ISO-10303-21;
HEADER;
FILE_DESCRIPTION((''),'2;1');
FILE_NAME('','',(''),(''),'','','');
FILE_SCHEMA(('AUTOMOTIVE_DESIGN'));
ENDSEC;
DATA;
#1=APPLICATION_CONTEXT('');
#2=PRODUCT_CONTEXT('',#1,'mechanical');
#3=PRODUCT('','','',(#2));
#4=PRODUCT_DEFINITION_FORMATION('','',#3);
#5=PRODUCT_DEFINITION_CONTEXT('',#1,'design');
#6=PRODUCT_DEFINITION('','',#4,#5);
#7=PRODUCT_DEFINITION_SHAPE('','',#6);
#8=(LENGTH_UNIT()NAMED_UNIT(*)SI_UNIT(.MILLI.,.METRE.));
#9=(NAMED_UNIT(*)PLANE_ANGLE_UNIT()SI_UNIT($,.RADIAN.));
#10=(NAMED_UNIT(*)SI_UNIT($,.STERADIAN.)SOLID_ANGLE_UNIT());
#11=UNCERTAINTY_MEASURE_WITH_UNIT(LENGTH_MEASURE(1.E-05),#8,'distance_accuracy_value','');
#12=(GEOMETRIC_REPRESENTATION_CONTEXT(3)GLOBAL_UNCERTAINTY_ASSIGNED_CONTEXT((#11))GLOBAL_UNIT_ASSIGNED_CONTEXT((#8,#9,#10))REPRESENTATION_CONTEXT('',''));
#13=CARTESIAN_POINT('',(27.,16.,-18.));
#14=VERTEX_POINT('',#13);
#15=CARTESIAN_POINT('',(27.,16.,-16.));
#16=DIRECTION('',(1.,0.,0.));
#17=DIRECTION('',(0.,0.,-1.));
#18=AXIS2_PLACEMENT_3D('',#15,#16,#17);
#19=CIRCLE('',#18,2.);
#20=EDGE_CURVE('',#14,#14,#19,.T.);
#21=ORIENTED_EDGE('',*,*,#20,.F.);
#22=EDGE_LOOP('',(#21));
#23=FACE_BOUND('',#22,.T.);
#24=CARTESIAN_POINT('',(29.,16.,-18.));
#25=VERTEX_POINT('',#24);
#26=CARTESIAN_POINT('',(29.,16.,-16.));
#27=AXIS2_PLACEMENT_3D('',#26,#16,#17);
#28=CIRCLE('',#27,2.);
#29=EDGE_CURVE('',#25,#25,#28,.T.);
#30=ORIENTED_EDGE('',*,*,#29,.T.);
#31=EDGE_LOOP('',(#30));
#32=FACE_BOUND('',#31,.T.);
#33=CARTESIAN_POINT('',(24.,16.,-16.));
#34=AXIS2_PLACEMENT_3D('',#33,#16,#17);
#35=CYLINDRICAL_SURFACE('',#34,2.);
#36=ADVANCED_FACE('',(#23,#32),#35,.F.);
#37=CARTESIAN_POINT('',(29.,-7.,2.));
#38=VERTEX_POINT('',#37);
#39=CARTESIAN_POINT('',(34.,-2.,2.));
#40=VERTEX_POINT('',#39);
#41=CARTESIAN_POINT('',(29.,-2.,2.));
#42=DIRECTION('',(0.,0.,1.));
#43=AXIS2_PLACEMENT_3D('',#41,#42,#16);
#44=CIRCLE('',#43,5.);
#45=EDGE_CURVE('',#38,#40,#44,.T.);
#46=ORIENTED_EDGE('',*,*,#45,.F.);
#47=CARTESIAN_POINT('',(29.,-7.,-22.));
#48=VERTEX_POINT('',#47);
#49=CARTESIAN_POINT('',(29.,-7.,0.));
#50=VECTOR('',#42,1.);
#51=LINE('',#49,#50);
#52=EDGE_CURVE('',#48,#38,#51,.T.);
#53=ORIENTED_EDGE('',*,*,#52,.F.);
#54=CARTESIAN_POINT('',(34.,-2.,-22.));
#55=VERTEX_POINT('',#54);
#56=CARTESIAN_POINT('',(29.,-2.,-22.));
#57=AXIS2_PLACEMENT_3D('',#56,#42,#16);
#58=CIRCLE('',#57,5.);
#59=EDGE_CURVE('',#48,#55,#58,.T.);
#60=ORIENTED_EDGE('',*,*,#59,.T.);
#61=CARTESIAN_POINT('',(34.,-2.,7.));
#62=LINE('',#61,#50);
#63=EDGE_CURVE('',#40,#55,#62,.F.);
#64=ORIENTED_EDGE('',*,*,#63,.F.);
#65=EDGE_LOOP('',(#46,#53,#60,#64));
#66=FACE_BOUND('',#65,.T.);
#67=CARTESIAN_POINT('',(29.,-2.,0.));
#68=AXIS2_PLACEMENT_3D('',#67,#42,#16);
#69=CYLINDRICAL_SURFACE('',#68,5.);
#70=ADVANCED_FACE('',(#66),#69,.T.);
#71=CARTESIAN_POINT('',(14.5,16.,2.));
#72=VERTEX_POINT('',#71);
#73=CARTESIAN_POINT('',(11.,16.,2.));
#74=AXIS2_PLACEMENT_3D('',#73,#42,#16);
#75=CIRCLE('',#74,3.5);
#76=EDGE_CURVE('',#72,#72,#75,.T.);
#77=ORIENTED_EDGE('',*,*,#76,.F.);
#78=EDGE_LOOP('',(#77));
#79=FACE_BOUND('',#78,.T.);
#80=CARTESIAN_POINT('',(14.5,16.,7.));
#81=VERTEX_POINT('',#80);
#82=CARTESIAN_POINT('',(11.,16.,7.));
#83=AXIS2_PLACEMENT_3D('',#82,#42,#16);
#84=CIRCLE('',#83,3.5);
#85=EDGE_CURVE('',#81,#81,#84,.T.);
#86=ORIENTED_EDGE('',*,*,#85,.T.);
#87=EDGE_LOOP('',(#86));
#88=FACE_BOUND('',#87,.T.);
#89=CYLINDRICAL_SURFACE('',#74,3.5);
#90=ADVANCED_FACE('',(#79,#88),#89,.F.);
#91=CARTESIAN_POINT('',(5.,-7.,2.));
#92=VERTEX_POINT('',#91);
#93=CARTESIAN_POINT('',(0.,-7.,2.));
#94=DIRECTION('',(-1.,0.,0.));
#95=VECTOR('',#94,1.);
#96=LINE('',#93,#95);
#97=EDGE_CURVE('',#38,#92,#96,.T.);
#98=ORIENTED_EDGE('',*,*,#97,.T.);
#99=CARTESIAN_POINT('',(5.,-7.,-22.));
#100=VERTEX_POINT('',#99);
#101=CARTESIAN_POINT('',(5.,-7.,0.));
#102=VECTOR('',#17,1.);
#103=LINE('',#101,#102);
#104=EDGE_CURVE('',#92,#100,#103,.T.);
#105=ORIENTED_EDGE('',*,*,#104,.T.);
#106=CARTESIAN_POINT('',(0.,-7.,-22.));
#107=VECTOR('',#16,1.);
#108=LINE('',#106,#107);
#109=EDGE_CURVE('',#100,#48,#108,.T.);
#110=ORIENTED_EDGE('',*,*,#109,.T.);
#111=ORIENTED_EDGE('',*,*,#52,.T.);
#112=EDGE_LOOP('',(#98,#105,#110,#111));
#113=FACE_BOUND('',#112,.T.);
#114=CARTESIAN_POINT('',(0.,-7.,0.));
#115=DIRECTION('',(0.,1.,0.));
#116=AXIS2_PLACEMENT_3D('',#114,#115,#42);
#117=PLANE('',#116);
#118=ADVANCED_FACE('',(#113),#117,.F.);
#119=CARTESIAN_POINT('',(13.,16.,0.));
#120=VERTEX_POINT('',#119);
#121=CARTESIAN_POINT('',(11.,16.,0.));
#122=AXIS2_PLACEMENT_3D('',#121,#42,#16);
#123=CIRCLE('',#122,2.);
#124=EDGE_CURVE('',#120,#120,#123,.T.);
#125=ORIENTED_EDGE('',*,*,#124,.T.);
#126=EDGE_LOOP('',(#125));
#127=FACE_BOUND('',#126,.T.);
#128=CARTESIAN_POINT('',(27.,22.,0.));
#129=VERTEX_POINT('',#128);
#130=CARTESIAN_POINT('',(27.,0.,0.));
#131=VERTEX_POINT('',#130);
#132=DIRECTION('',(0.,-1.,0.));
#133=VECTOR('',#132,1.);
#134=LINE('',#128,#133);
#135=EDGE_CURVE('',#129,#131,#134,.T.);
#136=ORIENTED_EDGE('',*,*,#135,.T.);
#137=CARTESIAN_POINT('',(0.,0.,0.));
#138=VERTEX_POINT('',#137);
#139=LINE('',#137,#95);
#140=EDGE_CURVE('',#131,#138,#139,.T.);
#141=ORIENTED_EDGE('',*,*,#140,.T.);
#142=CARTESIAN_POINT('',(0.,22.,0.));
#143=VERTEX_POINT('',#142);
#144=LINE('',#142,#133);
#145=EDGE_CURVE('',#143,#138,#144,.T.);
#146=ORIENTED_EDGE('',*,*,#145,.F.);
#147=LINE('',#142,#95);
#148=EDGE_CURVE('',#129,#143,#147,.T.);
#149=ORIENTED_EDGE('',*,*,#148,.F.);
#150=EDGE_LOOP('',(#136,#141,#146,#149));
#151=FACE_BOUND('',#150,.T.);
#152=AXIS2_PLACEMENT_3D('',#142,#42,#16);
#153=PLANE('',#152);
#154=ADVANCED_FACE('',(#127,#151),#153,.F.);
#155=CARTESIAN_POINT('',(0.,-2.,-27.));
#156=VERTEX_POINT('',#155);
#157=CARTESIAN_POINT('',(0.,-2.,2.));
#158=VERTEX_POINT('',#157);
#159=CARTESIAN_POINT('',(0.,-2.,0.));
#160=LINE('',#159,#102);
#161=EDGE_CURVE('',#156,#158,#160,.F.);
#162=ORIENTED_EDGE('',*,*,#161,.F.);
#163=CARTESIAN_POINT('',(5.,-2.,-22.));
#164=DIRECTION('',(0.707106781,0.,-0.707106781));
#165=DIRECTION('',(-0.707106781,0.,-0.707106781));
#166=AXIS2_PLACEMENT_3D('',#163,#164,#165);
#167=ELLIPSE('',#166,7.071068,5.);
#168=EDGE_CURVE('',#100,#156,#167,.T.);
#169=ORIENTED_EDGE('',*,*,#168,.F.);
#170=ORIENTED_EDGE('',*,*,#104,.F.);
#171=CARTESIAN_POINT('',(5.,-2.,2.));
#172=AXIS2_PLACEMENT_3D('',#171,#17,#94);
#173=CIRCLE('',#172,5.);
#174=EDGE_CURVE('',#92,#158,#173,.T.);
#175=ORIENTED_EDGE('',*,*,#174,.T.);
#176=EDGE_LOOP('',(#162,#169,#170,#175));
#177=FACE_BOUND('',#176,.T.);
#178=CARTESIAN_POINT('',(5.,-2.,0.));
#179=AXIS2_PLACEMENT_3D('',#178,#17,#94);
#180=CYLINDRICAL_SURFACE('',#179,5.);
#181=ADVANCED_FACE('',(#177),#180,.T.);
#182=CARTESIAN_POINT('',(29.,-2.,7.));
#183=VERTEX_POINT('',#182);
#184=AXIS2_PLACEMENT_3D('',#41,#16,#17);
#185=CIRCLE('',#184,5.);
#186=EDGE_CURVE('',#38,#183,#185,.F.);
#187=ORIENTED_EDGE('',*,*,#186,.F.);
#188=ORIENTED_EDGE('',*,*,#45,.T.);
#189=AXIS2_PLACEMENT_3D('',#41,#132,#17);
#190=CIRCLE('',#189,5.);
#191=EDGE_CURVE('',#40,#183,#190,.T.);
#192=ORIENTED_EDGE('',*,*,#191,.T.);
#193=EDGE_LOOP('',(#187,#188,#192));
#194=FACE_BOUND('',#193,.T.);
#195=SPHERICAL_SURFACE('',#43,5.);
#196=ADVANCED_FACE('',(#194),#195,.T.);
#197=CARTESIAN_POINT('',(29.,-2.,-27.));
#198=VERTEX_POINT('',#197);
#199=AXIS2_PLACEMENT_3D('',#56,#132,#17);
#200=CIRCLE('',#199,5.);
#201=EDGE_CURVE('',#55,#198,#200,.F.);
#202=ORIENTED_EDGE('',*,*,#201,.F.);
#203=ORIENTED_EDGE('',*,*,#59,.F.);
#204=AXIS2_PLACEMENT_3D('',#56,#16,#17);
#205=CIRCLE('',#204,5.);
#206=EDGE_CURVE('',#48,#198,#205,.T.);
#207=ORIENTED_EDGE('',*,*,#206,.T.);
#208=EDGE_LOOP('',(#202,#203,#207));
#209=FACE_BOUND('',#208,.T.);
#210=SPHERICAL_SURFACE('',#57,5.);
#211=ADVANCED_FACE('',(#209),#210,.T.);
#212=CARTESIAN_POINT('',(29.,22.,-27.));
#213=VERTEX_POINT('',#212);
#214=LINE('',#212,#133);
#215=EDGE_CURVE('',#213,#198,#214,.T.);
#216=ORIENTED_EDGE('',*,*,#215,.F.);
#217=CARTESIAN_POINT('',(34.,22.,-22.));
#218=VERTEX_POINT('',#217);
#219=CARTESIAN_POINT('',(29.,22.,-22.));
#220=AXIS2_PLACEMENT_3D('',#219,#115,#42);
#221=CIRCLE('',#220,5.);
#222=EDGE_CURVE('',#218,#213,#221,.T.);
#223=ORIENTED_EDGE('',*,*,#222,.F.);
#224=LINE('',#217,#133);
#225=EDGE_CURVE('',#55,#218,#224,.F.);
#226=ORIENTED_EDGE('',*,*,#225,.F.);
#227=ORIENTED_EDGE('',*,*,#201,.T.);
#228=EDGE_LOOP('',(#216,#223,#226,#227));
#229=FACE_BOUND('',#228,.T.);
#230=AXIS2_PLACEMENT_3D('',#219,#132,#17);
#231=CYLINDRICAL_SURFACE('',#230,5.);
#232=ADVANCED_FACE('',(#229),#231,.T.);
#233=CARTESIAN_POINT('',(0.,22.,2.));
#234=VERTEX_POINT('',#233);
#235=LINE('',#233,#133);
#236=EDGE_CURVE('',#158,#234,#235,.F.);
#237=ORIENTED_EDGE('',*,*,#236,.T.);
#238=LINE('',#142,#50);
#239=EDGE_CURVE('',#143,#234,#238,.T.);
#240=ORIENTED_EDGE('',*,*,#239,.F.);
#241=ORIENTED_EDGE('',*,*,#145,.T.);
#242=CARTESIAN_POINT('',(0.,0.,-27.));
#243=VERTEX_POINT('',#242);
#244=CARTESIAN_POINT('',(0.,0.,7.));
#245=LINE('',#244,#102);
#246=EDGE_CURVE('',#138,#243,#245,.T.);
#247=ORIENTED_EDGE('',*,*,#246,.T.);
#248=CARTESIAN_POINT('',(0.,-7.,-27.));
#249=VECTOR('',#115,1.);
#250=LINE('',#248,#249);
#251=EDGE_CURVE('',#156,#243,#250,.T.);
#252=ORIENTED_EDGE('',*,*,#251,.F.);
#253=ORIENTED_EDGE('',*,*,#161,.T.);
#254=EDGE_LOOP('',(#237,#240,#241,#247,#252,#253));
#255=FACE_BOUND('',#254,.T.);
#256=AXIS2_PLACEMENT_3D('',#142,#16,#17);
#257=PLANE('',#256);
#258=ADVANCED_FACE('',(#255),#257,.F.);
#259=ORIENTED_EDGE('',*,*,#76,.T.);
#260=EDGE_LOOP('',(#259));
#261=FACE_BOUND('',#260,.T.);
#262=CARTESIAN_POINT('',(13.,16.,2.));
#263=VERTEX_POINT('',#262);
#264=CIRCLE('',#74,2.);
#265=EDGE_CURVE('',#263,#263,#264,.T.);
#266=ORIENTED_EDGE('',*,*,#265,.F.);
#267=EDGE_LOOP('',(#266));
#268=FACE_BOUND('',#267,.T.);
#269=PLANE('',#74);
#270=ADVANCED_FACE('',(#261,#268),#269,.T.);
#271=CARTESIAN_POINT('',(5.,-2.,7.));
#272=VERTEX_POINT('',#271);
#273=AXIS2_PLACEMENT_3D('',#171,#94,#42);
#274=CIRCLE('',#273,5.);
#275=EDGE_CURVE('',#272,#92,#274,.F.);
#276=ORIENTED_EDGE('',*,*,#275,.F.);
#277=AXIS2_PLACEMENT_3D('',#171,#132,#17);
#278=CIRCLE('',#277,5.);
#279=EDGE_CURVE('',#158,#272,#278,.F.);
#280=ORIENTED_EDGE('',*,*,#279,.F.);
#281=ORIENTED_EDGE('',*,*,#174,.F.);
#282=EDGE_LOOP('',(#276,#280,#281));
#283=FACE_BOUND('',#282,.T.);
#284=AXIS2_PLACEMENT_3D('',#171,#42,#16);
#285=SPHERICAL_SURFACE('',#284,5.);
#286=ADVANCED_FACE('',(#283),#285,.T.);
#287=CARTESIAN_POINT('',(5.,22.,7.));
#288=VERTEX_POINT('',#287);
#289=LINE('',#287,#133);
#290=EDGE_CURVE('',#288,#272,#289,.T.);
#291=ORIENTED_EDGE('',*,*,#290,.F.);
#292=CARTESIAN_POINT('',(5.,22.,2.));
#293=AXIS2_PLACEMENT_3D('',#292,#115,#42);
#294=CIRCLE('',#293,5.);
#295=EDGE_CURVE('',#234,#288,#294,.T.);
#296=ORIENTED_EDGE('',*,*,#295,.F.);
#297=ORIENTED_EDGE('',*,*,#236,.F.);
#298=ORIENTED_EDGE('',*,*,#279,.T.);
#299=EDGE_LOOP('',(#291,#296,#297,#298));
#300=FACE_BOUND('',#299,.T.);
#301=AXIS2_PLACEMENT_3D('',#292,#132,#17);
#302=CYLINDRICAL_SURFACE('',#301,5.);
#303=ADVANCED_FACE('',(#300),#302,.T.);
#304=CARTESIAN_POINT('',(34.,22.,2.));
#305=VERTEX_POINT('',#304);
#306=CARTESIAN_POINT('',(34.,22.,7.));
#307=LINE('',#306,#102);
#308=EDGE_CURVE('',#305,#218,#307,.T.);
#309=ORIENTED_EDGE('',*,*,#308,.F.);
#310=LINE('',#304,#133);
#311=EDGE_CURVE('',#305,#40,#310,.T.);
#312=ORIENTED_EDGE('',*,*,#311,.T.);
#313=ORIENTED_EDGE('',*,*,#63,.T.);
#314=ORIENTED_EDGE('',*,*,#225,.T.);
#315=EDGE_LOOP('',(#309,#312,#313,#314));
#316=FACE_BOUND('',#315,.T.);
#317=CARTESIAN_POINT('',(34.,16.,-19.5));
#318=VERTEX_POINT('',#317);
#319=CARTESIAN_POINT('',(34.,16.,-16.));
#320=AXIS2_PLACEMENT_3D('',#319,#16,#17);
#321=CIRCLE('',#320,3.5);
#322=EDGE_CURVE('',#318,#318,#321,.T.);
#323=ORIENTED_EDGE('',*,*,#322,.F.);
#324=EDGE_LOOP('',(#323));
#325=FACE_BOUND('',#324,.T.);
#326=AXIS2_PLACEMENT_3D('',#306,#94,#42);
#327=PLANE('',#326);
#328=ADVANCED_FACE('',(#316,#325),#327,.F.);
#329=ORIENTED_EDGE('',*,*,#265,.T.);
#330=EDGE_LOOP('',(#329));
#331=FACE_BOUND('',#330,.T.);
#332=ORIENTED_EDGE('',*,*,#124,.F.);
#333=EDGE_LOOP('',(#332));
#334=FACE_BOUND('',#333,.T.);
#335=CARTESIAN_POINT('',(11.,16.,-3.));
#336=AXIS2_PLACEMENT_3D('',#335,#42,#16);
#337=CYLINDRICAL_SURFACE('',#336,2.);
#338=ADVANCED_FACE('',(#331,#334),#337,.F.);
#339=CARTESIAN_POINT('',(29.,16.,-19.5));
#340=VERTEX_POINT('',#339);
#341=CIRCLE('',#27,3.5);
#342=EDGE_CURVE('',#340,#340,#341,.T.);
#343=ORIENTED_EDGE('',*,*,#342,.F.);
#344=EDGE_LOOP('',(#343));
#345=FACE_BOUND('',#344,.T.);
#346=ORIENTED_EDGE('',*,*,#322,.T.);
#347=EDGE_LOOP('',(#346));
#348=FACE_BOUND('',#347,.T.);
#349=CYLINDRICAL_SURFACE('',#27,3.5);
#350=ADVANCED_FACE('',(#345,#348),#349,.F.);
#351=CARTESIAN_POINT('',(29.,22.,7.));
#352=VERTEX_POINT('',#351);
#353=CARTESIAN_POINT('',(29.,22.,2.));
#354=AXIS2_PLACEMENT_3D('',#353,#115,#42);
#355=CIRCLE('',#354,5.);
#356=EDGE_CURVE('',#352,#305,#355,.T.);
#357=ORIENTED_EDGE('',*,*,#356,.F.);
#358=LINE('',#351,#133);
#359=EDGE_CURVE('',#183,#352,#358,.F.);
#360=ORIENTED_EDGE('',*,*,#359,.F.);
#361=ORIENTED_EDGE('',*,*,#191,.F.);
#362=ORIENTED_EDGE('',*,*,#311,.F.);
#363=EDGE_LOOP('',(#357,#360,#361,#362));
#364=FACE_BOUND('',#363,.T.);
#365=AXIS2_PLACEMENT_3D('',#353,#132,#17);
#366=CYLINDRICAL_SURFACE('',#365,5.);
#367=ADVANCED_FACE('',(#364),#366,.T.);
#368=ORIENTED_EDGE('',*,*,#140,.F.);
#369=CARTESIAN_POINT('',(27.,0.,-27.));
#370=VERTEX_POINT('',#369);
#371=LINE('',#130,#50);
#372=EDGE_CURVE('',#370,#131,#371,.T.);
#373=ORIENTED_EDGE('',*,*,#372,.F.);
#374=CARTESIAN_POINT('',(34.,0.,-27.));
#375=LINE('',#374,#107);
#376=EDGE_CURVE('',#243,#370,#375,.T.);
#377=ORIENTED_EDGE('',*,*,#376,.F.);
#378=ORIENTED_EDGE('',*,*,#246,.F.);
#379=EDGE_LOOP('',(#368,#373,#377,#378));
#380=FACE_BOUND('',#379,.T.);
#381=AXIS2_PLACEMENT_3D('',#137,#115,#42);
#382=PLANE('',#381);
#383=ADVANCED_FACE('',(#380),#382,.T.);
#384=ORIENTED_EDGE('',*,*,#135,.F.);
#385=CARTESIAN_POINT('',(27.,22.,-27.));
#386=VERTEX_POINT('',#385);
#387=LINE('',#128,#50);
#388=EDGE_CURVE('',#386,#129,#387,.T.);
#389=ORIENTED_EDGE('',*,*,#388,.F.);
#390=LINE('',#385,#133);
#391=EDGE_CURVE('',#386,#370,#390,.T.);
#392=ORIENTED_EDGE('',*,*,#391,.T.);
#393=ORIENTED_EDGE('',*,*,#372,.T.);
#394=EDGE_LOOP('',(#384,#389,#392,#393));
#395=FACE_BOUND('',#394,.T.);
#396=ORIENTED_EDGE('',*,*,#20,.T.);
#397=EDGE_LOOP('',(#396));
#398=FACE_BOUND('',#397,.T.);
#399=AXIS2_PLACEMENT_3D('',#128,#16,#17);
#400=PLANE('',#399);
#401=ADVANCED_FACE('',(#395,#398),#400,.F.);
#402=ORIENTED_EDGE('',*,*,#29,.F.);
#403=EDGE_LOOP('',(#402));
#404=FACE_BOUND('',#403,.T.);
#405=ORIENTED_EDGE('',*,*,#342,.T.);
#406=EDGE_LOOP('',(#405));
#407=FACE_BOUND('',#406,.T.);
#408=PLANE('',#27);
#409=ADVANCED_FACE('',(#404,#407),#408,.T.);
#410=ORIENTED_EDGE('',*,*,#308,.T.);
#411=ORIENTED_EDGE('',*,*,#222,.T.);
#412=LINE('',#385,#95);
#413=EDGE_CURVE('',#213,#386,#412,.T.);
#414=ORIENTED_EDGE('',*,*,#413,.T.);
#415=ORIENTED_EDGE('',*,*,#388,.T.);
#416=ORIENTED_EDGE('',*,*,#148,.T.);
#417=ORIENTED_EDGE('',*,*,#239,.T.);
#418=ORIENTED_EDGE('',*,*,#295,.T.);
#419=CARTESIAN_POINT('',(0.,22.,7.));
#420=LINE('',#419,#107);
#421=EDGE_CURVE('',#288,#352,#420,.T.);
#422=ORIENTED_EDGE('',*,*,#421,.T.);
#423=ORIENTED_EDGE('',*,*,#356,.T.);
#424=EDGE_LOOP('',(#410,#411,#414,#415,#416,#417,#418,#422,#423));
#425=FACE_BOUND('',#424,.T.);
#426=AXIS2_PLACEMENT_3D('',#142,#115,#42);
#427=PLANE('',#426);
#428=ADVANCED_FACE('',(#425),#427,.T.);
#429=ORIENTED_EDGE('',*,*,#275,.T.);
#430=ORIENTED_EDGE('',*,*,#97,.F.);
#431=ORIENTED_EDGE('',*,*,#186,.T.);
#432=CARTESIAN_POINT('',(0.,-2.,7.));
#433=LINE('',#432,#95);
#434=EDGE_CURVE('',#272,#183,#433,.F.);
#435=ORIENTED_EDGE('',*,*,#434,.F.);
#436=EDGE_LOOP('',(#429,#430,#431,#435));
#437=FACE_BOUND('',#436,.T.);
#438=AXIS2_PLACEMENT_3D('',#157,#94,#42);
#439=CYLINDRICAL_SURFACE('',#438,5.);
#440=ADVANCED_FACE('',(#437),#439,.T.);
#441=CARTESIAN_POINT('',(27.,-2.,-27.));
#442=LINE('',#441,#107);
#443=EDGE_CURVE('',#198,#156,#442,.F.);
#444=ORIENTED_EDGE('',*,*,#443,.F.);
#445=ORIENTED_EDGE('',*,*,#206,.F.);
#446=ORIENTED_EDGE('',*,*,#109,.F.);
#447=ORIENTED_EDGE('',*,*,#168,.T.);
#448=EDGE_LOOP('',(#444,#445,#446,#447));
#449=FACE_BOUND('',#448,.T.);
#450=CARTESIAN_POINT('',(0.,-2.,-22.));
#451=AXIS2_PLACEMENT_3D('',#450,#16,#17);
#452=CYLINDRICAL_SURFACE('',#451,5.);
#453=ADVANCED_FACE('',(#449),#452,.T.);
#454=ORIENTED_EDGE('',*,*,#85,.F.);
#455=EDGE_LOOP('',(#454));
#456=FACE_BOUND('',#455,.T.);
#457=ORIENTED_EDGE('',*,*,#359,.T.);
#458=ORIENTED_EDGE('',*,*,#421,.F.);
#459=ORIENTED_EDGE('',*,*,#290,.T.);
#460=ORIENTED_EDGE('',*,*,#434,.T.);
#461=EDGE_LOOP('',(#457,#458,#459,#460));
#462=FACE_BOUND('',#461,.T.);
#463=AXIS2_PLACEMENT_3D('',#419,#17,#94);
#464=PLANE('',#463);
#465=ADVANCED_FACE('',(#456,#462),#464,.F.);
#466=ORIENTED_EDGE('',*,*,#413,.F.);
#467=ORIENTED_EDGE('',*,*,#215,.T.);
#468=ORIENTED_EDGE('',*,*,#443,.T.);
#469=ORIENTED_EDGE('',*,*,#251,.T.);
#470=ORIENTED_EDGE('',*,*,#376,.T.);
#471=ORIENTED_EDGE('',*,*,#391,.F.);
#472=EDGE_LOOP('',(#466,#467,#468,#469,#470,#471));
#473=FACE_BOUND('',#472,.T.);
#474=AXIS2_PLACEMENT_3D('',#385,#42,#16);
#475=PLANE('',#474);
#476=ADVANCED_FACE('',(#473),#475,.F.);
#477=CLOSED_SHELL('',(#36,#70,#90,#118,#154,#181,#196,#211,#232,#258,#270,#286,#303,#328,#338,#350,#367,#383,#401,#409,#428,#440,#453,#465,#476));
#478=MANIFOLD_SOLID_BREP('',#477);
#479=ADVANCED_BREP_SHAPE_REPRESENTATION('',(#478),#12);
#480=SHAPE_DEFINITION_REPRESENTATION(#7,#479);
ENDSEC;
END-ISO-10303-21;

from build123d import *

# Parameters (mm, degrees)
SALIENTE_EXTRUIR1_DEPTH = 22
CROQUIS2_W              = 34
CROQUIS2_H              = 34
SALIENTE_EXTRUIR2_DEPTH = 7
REDONDEO1_R             = 5
CROQUIS3_R              = 3.5
CORTAR_EXTRUIR1_DEPTH   = 5
CROQUIS4_R              = 2
CORTAR_EXTRUIR2_DEPTH   = 5
CROQUIS5_R              = 3.5
CORTAR_EXTRUIR3_DEPTH   = 5
CROQUIS6_R              = 2
CORTAR_EXTRUIR4_DEPTH   = 5
REDONDEO2_R             = 5


with BuildPart() as part:
    # Croquis1 → Saliente-Extruir1 (new body)
    with BuildSketch(Plane(origin=(0, 0, 0), x_dir=(1, 0, 0), z_dir=(0, 1, 0))):
        Polygon((0, 0), (27, 0), (27, 27), (34, 27), (34, -7), (0, -7), align=None)
    extrude(amount=SALIENTE_EXTRUIR1_DEPTH)

    # Croquis2 → Saliente-Extruir2 (add)
    with BuildSketch(Plane(origin=(0, 0, 0), x_dir=(-1, 0, 0), z_dir=(0, -1, 0))):
        with Locations((-17, 10)):
            Rectangle(CROQUIS2_W, CROQUIS2_H)
    extrude(amount=SALIENTE_EXTRUIR2_DEPTH)

    # Redondeo1
    redondeo1_edges = [part.edges().sort_by_distance(p)[0] for p in [
        (34, 7.5, -27),
        (34, 7.5, 7),
        (0, 7.5, 7),
        (34, -7, -10),
        (17, -7, 7),
    ]]
    fillet(redondeo1_edges, radius=REDONDEO1_R)

    # Croquis3 → Cortar-Extruir1 (cut)
    with BuildSketch(Plane(origin=(34, 0, 0), x_dir=(0, 0, -1), z_dir=(1, 0, 0))):
        with Locations((16, 16)):
            Circle(CROQUIS3_R)
    extrude(amount=-CORTAR_EXTRUIR1_DEPTH, mode=Mode.SUBTRACT)

    # Croquis4 → Cortar-Extruir2 (cut)
    with BuildSketch(Plane(origin=(29, 0, 0), x_dir=(0, 0, -1), z_dir=(1, 0, 0))):
        with Locations((16, 16)):
            Circle(CROQUIS4_R)
    extrude(amount=-CORTAR_EXTRUIR2_DEPTH, mode=Mode.SUBTRACT)

    # Croquis5 → Cortar-Extruir3 (cut)
    with BuildSketch(Plane.XY.offset(7)):
        with Locations((11, 16)):
            Circle(CROQUIS5_R)
    extrude(amount=-CORTAR_EXTRUIR3_DEPTH, mode=Mode.SUBTRACT)

    # Croquis6 → Cortar-Extruir4 (cut)
    with BuildSketch(Plane.XY.offset(2)):
        with Locations((11, 16)):
            Circle(CROQUIS6_R)
    extrude(amount=-CORTAR_EXTRUIR4_DEPTH, mode=Mode.SUBTRACT)

    # Redondeo2
    # the kernel refuses this fillet: 5 mm, written as the material it takes off along each edge
    with BuildSketch(Plane(origin=(29, -2, -22), x_dir=(0, -1, 0), z_dir=(0, 0, -1))) as redondeo2_piece_1_section:
        Polygon((0, 0), (REDONDEO2_R, 0), (REDONDEO2_R, -REDONDEO2_R), (0, -REDONDEO2_R), align=None)
    redondeo2_piece_1 = extrude(amount=REDONDEO2_R, mode=Mode.PRIVATE)
    redondeo2_piece_1 = redondeo2_piece_1 - Plane(origin=(29, -2, -22), x_dir=(-0.7071067811865475, 0.7071067811865475, 0), z_dir=(0, 0, -1)) * Sphere(REDONDEO2_R, mode=Mode.PRIVATE)
    add(redondeo2_piece_1, mode=Mode.SUBTRACT)
    with BuildSketch(Plane(origin=(5, -2, 2), x_dir=(0, -1, 0), z_dir=(-1, 0, 0))) as redondeo2_piece_2_section:
        Polygon((0, 0), (REDONDEO2_R, 0), (REDONDEO2_R, REDONDEO2_R), (0, REDONDEO2_R), align=None)
    redondeo2_piece_2 = extrude(amount=REDONDEO2_R, mode=Mode.PRIVATE)
    redondeo2_piece_2 = redondeo2_piece_2 - Plane(origin=(5, -2, 2), x_dir=(0, 0.7071067811865475, -0.7071067811865475), z_dir=(-1, 0, 0)) * Sphere(REDONDEO2_R, mode=Mode.PRIVATE)
    add(redondeo2_piece_2, mode=Mode.SUBTRACT)
    with BuildSketch(Plane(origin=(-12.5, -7, -27), x_dir=(0, 1, 0), z_dir=(1, 0, 0)), Plane(origin=(0, -7, 2), x_dir=(0, 1, 0), z_dir=(0, 0, -1))) as redondeo2_piece_3:
        with BuildLine():
            CenterArc((REDONDEO2_R, REDONDEO2_R), REDONDEO2_R, 180, 90)
            Line((0, REDONDEO2_R), (0, 0))
            Line((0, 0), (REDONDEO2_R, 0))
        make_face()
    extrude(amount=41.5, mode=Mode.SUBTRACT)


solid = part.part
